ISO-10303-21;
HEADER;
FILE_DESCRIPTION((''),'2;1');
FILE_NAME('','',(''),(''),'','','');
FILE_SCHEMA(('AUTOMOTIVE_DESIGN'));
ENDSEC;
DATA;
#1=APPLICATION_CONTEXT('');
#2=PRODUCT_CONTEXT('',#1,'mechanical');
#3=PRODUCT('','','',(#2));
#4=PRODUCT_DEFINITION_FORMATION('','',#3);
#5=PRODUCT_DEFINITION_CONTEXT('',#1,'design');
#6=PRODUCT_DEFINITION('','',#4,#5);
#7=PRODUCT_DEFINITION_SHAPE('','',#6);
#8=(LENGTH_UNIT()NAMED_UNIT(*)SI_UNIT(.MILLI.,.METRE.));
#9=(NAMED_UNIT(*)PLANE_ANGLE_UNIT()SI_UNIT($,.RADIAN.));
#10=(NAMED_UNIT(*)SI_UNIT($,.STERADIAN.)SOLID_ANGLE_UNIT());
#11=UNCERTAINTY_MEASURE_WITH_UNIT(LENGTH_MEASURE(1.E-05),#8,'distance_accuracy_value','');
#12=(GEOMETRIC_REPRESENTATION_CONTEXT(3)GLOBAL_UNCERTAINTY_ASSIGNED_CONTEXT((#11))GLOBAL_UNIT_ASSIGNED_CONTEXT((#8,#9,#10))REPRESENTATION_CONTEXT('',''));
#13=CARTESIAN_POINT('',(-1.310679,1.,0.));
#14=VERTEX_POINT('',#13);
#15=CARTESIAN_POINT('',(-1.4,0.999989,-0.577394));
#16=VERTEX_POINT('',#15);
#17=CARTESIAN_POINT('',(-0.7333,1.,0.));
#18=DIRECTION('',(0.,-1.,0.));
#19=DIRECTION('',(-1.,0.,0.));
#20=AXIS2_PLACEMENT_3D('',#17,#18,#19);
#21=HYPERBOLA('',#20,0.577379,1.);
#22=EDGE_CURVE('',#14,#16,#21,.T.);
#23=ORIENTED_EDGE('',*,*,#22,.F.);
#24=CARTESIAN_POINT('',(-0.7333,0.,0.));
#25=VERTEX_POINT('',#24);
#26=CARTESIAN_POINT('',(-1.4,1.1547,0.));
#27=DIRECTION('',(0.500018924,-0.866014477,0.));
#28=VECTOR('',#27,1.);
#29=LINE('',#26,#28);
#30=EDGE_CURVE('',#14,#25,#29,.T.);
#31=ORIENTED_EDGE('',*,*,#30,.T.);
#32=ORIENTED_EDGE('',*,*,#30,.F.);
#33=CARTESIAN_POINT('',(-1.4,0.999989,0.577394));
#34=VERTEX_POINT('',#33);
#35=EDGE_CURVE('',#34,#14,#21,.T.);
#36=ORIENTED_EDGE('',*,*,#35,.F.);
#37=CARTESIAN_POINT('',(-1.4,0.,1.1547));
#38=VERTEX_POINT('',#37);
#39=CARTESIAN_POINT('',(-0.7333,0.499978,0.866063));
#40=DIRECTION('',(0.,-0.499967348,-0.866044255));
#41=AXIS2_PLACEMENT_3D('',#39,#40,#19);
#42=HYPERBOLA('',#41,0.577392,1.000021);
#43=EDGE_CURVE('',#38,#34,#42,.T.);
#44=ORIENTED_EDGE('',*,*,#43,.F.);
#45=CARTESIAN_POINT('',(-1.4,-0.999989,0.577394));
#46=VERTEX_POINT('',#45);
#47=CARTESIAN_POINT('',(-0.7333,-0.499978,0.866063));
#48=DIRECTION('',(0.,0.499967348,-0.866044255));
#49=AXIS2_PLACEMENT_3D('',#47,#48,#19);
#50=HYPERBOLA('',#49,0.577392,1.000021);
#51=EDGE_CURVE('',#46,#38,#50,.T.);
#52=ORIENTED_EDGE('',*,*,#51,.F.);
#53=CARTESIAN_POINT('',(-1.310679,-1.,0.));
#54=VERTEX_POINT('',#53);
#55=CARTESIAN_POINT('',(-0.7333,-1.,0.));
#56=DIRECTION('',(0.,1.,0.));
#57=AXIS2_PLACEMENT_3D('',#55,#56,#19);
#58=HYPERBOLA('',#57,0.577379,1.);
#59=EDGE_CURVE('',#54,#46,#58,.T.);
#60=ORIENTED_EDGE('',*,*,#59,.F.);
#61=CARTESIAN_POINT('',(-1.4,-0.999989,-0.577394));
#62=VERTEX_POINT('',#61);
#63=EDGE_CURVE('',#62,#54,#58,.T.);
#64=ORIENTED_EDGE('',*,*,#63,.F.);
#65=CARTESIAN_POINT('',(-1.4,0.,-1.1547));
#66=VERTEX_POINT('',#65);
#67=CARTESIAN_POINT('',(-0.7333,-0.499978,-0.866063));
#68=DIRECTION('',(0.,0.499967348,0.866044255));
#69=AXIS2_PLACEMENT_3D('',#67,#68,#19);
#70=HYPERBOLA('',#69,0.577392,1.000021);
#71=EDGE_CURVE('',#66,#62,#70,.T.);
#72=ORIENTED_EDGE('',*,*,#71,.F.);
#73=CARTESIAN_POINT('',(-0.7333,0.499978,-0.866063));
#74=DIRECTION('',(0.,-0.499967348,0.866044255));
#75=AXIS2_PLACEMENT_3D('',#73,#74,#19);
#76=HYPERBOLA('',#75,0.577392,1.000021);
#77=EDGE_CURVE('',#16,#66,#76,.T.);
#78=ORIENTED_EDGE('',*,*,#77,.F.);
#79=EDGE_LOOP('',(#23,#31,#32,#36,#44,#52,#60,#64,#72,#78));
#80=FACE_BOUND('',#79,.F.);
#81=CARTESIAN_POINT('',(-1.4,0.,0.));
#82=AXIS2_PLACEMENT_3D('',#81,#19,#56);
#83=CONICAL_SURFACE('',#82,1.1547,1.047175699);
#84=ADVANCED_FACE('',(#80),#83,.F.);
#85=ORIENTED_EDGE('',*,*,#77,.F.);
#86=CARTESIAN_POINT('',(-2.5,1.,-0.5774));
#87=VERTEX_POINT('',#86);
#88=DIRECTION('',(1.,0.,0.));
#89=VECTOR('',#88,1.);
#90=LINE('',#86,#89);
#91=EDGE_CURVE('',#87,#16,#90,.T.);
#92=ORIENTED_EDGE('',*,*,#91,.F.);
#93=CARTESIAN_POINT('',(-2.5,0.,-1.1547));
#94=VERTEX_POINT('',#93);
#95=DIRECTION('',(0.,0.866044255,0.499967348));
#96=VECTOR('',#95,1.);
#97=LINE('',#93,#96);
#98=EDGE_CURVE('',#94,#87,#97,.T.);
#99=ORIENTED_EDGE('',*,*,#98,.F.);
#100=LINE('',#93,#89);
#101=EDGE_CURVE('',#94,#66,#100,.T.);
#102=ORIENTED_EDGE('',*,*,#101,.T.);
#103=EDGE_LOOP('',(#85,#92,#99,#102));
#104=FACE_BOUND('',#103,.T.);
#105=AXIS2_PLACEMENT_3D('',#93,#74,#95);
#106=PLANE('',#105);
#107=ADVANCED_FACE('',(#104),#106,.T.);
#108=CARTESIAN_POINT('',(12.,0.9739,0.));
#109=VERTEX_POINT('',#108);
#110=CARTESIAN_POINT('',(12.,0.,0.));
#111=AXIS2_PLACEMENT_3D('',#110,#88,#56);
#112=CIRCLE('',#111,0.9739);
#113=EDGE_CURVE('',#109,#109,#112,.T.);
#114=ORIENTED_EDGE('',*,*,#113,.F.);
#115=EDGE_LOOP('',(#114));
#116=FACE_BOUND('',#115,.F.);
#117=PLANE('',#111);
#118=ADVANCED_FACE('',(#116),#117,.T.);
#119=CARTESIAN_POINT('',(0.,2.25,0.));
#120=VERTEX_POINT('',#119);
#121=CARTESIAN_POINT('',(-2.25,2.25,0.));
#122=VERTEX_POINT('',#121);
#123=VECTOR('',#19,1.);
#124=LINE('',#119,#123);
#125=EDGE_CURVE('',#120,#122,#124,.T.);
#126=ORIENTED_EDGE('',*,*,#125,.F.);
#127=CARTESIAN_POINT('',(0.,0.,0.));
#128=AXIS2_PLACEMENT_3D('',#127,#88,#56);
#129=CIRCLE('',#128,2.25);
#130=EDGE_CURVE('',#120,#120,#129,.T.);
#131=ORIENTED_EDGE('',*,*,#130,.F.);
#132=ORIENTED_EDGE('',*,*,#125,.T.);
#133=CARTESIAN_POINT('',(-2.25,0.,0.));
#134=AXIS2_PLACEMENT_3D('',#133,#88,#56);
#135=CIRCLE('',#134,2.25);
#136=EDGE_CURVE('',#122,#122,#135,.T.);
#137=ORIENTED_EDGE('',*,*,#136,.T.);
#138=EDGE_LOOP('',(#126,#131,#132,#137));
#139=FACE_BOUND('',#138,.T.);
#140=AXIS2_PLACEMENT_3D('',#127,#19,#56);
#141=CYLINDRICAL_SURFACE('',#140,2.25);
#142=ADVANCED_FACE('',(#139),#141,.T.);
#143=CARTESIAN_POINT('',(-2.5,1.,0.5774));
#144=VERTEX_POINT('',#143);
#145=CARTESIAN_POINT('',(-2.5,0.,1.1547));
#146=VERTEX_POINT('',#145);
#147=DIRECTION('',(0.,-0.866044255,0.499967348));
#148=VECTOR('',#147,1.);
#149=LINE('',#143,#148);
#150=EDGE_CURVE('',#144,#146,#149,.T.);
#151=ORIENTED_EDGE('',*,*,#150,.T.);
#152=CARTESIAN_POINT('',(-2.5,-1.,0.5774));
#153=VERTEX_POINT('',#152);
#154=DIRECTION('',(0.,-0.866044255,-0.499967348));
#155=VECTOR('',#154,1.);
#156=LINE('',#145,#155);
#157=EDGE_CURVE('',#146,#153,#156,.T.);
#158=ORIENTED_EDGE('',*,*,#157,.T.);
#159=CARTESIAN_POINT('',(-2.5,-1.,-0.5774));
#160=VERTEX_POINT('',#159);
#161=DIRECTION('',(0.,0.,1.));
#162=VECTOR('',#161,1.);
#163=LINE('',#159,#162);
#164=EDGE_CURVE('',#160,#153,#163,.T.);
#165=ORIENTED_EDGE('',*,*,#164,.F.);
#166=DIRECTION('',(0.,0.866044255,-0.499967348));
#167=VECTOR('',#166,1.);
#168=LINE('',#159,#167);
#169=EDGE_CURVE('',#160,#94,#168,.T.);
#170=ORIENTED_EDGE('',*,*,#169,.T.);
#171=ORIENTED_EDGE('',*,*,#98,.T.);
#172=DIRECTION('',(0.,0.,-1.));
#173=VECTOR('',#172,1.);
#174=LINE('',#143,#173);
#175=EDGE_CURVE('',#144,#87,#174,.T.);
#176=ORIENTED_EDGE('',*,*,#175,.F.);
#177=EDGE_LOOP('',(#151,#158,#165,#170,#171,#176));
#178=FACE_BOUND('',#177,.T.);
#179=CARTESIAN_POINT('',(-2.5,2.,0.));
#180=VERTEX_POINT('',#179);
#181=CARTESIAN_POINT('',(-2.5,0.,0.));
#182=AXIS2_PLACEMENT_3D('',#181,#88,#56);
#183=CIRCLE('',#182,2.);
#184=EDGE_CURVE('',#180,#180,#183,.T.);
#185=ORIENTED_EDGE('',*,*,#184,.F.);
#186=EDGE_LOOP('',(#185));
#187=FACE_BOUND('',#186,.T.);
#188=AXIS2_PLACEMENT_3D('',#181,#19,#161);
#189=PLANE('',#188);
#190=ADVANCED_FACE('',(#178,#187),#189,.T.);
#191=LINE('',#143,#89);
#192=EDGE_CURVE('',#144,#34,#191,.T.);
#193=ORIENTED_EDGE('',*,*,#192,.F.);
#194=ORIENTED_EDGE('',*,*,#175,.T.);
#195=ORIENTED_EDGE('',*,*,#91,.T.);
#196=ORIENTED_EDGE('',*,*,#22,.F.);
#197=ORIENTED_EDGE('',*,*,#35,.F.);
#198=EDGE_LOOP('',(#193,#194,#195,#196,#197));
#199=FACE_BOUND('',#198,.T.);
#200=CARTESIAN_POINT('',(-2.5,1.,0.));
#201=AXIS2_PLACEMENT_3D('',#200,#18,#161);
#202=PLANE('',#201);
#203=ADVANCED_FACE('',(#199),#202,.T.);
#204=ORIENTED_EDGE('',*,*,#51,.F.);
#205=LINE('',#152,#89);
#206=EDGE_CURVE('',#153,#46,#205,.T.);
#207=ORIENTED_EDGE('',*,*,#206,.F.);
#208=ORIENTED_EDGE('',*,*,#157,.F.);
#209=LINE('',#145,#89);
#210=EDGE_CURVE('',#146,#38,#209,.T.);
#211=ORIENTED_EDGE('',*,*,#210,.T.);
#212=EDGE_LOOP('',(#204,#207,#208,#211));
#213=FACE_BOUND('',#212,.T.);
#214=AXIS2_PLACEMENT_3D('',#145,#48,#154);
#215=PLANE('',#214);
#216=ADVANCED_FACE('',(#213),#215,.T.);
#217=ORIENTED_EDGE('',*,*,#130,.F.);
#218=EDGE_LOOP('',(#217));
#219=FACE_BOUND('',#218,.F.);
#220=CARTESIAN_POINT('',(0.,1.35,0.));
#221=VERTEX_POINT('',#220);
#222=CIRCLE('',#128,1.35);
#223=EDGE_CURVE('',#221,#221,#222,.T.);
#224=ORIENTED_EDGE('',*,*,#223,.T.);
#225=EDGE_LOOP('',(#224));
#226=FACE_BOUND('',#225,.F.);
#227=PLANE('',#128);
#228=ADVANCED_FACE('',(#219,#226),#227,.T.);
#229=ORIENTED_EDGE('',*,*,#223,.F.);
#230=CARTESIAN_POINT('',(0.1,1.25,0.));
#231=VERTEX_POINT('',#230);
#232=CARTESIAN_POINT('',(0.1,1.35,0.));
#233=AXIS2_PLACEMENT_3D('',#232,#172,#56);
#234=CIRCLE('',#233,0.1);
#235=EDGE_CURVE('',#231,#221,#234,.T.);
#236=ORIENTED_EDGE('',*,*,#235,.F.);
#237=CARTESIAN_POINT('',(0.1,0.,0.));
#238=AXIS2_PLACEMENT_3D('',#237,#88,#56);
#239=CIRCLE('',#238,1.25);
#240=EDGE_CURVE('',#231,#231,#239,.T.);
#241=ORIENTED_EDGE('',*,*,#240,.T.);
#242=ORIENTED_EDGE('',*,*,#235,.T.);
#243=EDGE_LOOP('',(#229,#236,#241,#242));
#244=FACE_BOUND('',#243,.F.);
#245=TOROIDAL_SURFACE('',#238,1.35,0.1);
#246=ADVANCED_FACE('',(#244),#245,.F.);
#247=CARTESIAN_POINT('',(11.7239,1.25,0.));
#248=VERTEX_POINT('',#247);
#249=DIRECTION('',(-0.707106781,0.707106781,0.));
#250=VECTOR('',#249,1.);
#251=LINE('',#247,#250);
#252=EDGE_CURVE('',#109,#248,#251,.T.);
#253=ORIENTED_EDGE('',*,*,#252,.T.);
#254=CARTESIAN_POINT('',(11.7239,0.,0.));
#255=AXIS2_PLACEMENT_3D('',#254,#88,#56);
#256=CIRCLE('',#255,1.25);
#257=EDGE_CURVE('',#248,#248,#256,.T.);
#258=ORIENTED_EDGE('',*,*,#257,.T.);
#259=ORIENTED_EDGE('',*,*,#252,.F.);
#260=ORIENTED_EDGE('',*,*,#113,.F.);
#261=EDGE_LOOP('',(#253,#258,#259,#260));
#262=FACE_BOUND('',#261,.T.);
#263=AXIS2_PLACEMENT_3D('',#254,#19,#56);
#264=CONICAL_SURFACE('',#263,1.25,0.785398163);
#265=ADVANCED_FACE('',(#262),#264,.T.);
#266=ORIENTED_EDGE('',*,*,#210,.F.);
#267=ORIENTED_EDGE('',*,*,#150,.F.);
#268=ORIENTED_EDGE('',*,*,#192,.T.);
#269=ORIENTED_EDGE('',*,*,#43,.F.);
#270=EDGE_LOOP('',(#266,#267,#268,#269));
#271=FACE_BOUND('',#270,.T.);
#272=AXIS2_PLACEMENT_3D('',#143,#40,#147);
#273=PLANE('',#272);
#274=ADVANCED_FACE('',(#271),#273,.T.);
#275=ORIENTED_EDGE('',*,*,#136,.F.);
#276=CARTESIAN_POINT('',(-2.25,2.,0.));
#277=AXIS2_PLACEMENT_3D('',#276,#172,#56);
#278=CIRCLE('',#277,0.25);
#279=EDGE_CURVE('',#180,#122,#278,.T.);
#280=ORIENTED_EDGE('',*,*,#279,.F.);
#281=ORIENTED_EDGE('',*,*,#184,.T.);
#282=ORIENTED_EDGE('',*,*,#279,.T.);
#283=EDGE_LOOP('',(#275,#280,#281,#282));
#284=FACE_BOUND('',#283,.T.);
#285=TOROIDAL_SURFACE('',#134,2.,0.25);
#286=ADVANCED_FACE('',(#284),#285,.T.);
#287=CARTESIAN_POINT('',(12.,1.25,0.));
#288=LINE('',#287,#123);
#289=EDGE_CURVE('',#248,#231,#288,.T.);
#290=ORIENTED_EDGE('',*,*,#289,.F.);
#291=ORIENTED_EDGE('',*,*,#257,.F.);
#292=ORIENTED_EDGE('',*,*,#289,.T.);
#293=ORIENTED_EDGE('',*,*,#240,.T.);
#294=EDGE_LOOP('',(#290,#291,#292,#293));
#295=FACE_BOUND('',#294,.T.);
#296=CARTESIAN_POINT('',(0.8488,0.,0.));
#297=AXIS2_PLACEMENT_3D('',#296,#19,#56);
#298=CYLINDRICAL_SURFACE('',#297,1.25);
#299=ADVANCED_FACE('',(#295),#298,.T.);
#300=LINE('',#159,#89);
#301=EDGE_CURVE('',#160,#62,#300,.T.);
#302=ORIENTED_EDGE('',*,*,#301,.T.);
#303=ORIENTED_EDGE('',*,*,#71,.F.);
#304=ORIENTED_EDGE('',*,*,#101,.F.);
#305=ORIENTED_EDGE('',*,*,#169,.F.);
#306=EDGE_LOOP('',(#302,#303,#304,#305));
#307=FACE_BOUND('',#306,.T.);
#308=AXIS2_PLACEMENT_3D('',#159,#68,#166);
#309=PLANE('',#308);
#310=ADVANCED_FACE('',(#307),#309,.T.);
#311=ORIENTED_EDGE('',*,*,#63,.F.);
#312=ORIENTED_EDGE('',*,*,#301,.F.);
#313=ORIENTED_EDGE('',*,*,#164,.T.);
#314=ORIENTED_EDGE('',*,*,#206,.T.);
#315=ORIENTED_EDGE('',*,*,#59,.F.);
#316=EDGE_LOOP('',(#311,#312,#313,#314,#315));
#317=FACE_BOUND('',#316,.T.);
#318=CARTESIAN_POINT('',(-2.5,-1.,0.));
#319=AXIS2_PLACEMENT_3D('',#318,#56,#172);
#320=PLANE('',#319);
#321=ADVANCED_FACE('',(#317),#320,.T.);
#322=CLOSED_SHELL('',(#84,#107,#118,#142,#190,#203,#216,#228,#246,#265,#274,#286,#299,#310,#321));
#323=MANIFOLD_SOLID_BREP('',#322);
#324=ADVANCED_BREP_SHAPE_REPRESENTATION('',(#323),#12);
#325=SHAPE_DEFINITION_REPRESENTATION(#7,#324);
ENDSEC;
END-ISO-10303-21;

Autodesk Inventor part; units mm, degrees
ref_plane "YZ Plane" through (0, 0, 0) normal (1, 0, 0) x (0, 1, 0)
ref_plane "XZ Plane" through (0, 0, 0) normal (0, 1, 0) x (-1, 0, 0)
sketch "Skizze1" plane through (0, 0, 0) normal (0, 0, 1) x (1, 0, 0)
  line L0 (-0.7333, 0) -> (12, 0)
  line L1 (12, 0) -> (12, 1.25)
  line L2 (12, 1.25) -> (1.125, 1.25)
  line L3 (1.125, 1.25) -> (0.8488, 1.25)
  line L4 (0.8488, 1.25) -> (0, 1.25)
  line L5 (0, 1.25) -> (0, 2.25)
  line L6 (0, 2.25) -> (-2.5, 2.25)
  line L7 (-2.5, 2.25) -> (-2.5, 1.1547)
  line L8 (-2.5, 1.1547) -> (-1.4, 1.1547)
  line L9 (-1.4, 1.1547) -> (-0.7333, 0)
  line L10 (-5.4, 0) -> (14.9, 0) projected
  line L11 (0, -0.45) -> (0, 2.7) projected
  line L12 (1.125, 1.25) -> (0, 1.25) construction
  dimension "d1" = 10.875
  dimension "d2" = 0.2762
  dimension "d3" = 2.5
  dimension "d4" = 1.1
  dimension "d5" = 60
  dimension "d6" = 2.5
  dimension "d7" = 2.5
  dimension "d8" = 2.3094
  dimension "d9" = 4.5
  dimension "d26" = 12
revolve "Körper" add sketch "Skizze1" angle 360 about axis through (-0.7333, 0, 0) along (1, 0, 0)
sketch "Skizze2" plane through (-2.5, 0, 0) normal (-1, 0, 0) x (0, 0, 1)
  circle A0 centre (0, 0) radius 1.1547 projected
  line L0 (0, -3.15) -> (0, 3.15) projected
  line L1 (-3.15, 0) -> (3.15, 0) projected
  line L2 (1.1547, 0) -> (0.5774, -1)
  line L3 (0.5774, -1) -> (-0.5774, -1)
  line L4 (-0.5774, -1) -> (-1.1547, 0)
  line L5 (-1.1547, 0) -> (-0.5774, 1)
  line L6 (-0.5774, 1) -> (0.5774, 1)
  line L7 (0.5774, 1) -> (1.1547, 0)
extrude "Loch" add sketch "Skizze2" against normal up to next contours L7 A0 | A0 L2 | L6 L0 A0 | A0 L0 L3 | L0 L6 A0 | A0 L3 L0 | L4 A0 | A0 L5
fillet "Rundung1" radius 0.25 1 edges at (-2.5, -2.25, 0)
thread "Gewinde" size "M2.5x0.45" class "6g" standard "ISO Metric profile" length 10.875
chamfer "Fase1" distance 0.2761 distance2 0.2761 1 edges at (12, -1.25, 0) measured on face at (12, -0.2714, -0.6096)
ref_plane "Work Plane1" through (29, 0, 0) normal (0, -1, 0) x (1, 0, 0)
fillet "Fillet2" radius 0.1 1 edges at (0, -1.25, 0)
equation "\"d1\" = GEL"
equation "\"d3\" = KOH"
equation "\"d4\" = INTI"
equation "\"d6\" = GD"
equation "\"d7\" = BDM"
equation "\"d8\" = 1.1547 * SW"
equation "\"d9\" = KOD"
equation "\"d26\" = NLG"
equation "\"d30\" = R"
equation "\"d17\" = RR"
equation "\"d13\" = GEL"
equation "\"d15\" = -0.5 * SPD + 0.5 * GD"
equation "\"d16\" = GUL"
equation "\"GD\" = 2.5"
equation "\"NLG\" = 12"
equation "\"GEL\" = 10.875"
equation "\"KOD\" = 4.5"
equation "\"KOH\" = 2.5"
equation "\"INTI\" = 1.1"
equation "\"GAL\" = 0.61345 * PTC"
equation "\"GUL\" = 0.61345 * PTC"
equation "\"BDM\" = NND"
equation "\"SW\" = 2"
equation "\"RR\" = 0.25"
equation "\"SPD\" = NND - 1.2269 * PTC"
equation "\"R\" = 0.1"
equation "\"TOA\" = 30deg"
equation "\"GD1\" = THREADDIA - 1.2269 * PTC"
equation "\"THREADDIA\" = 2.5"
equation "\"FAWI\" = 45deg"
equation "\"PTC\" = 0.45"
equation "\"NND\" = 2.5"
equation "\"E0\" = 1.155 * SW"
properties part number "ISO 4762 - M2,5 x 12" material "Edelstahl, 440C"
